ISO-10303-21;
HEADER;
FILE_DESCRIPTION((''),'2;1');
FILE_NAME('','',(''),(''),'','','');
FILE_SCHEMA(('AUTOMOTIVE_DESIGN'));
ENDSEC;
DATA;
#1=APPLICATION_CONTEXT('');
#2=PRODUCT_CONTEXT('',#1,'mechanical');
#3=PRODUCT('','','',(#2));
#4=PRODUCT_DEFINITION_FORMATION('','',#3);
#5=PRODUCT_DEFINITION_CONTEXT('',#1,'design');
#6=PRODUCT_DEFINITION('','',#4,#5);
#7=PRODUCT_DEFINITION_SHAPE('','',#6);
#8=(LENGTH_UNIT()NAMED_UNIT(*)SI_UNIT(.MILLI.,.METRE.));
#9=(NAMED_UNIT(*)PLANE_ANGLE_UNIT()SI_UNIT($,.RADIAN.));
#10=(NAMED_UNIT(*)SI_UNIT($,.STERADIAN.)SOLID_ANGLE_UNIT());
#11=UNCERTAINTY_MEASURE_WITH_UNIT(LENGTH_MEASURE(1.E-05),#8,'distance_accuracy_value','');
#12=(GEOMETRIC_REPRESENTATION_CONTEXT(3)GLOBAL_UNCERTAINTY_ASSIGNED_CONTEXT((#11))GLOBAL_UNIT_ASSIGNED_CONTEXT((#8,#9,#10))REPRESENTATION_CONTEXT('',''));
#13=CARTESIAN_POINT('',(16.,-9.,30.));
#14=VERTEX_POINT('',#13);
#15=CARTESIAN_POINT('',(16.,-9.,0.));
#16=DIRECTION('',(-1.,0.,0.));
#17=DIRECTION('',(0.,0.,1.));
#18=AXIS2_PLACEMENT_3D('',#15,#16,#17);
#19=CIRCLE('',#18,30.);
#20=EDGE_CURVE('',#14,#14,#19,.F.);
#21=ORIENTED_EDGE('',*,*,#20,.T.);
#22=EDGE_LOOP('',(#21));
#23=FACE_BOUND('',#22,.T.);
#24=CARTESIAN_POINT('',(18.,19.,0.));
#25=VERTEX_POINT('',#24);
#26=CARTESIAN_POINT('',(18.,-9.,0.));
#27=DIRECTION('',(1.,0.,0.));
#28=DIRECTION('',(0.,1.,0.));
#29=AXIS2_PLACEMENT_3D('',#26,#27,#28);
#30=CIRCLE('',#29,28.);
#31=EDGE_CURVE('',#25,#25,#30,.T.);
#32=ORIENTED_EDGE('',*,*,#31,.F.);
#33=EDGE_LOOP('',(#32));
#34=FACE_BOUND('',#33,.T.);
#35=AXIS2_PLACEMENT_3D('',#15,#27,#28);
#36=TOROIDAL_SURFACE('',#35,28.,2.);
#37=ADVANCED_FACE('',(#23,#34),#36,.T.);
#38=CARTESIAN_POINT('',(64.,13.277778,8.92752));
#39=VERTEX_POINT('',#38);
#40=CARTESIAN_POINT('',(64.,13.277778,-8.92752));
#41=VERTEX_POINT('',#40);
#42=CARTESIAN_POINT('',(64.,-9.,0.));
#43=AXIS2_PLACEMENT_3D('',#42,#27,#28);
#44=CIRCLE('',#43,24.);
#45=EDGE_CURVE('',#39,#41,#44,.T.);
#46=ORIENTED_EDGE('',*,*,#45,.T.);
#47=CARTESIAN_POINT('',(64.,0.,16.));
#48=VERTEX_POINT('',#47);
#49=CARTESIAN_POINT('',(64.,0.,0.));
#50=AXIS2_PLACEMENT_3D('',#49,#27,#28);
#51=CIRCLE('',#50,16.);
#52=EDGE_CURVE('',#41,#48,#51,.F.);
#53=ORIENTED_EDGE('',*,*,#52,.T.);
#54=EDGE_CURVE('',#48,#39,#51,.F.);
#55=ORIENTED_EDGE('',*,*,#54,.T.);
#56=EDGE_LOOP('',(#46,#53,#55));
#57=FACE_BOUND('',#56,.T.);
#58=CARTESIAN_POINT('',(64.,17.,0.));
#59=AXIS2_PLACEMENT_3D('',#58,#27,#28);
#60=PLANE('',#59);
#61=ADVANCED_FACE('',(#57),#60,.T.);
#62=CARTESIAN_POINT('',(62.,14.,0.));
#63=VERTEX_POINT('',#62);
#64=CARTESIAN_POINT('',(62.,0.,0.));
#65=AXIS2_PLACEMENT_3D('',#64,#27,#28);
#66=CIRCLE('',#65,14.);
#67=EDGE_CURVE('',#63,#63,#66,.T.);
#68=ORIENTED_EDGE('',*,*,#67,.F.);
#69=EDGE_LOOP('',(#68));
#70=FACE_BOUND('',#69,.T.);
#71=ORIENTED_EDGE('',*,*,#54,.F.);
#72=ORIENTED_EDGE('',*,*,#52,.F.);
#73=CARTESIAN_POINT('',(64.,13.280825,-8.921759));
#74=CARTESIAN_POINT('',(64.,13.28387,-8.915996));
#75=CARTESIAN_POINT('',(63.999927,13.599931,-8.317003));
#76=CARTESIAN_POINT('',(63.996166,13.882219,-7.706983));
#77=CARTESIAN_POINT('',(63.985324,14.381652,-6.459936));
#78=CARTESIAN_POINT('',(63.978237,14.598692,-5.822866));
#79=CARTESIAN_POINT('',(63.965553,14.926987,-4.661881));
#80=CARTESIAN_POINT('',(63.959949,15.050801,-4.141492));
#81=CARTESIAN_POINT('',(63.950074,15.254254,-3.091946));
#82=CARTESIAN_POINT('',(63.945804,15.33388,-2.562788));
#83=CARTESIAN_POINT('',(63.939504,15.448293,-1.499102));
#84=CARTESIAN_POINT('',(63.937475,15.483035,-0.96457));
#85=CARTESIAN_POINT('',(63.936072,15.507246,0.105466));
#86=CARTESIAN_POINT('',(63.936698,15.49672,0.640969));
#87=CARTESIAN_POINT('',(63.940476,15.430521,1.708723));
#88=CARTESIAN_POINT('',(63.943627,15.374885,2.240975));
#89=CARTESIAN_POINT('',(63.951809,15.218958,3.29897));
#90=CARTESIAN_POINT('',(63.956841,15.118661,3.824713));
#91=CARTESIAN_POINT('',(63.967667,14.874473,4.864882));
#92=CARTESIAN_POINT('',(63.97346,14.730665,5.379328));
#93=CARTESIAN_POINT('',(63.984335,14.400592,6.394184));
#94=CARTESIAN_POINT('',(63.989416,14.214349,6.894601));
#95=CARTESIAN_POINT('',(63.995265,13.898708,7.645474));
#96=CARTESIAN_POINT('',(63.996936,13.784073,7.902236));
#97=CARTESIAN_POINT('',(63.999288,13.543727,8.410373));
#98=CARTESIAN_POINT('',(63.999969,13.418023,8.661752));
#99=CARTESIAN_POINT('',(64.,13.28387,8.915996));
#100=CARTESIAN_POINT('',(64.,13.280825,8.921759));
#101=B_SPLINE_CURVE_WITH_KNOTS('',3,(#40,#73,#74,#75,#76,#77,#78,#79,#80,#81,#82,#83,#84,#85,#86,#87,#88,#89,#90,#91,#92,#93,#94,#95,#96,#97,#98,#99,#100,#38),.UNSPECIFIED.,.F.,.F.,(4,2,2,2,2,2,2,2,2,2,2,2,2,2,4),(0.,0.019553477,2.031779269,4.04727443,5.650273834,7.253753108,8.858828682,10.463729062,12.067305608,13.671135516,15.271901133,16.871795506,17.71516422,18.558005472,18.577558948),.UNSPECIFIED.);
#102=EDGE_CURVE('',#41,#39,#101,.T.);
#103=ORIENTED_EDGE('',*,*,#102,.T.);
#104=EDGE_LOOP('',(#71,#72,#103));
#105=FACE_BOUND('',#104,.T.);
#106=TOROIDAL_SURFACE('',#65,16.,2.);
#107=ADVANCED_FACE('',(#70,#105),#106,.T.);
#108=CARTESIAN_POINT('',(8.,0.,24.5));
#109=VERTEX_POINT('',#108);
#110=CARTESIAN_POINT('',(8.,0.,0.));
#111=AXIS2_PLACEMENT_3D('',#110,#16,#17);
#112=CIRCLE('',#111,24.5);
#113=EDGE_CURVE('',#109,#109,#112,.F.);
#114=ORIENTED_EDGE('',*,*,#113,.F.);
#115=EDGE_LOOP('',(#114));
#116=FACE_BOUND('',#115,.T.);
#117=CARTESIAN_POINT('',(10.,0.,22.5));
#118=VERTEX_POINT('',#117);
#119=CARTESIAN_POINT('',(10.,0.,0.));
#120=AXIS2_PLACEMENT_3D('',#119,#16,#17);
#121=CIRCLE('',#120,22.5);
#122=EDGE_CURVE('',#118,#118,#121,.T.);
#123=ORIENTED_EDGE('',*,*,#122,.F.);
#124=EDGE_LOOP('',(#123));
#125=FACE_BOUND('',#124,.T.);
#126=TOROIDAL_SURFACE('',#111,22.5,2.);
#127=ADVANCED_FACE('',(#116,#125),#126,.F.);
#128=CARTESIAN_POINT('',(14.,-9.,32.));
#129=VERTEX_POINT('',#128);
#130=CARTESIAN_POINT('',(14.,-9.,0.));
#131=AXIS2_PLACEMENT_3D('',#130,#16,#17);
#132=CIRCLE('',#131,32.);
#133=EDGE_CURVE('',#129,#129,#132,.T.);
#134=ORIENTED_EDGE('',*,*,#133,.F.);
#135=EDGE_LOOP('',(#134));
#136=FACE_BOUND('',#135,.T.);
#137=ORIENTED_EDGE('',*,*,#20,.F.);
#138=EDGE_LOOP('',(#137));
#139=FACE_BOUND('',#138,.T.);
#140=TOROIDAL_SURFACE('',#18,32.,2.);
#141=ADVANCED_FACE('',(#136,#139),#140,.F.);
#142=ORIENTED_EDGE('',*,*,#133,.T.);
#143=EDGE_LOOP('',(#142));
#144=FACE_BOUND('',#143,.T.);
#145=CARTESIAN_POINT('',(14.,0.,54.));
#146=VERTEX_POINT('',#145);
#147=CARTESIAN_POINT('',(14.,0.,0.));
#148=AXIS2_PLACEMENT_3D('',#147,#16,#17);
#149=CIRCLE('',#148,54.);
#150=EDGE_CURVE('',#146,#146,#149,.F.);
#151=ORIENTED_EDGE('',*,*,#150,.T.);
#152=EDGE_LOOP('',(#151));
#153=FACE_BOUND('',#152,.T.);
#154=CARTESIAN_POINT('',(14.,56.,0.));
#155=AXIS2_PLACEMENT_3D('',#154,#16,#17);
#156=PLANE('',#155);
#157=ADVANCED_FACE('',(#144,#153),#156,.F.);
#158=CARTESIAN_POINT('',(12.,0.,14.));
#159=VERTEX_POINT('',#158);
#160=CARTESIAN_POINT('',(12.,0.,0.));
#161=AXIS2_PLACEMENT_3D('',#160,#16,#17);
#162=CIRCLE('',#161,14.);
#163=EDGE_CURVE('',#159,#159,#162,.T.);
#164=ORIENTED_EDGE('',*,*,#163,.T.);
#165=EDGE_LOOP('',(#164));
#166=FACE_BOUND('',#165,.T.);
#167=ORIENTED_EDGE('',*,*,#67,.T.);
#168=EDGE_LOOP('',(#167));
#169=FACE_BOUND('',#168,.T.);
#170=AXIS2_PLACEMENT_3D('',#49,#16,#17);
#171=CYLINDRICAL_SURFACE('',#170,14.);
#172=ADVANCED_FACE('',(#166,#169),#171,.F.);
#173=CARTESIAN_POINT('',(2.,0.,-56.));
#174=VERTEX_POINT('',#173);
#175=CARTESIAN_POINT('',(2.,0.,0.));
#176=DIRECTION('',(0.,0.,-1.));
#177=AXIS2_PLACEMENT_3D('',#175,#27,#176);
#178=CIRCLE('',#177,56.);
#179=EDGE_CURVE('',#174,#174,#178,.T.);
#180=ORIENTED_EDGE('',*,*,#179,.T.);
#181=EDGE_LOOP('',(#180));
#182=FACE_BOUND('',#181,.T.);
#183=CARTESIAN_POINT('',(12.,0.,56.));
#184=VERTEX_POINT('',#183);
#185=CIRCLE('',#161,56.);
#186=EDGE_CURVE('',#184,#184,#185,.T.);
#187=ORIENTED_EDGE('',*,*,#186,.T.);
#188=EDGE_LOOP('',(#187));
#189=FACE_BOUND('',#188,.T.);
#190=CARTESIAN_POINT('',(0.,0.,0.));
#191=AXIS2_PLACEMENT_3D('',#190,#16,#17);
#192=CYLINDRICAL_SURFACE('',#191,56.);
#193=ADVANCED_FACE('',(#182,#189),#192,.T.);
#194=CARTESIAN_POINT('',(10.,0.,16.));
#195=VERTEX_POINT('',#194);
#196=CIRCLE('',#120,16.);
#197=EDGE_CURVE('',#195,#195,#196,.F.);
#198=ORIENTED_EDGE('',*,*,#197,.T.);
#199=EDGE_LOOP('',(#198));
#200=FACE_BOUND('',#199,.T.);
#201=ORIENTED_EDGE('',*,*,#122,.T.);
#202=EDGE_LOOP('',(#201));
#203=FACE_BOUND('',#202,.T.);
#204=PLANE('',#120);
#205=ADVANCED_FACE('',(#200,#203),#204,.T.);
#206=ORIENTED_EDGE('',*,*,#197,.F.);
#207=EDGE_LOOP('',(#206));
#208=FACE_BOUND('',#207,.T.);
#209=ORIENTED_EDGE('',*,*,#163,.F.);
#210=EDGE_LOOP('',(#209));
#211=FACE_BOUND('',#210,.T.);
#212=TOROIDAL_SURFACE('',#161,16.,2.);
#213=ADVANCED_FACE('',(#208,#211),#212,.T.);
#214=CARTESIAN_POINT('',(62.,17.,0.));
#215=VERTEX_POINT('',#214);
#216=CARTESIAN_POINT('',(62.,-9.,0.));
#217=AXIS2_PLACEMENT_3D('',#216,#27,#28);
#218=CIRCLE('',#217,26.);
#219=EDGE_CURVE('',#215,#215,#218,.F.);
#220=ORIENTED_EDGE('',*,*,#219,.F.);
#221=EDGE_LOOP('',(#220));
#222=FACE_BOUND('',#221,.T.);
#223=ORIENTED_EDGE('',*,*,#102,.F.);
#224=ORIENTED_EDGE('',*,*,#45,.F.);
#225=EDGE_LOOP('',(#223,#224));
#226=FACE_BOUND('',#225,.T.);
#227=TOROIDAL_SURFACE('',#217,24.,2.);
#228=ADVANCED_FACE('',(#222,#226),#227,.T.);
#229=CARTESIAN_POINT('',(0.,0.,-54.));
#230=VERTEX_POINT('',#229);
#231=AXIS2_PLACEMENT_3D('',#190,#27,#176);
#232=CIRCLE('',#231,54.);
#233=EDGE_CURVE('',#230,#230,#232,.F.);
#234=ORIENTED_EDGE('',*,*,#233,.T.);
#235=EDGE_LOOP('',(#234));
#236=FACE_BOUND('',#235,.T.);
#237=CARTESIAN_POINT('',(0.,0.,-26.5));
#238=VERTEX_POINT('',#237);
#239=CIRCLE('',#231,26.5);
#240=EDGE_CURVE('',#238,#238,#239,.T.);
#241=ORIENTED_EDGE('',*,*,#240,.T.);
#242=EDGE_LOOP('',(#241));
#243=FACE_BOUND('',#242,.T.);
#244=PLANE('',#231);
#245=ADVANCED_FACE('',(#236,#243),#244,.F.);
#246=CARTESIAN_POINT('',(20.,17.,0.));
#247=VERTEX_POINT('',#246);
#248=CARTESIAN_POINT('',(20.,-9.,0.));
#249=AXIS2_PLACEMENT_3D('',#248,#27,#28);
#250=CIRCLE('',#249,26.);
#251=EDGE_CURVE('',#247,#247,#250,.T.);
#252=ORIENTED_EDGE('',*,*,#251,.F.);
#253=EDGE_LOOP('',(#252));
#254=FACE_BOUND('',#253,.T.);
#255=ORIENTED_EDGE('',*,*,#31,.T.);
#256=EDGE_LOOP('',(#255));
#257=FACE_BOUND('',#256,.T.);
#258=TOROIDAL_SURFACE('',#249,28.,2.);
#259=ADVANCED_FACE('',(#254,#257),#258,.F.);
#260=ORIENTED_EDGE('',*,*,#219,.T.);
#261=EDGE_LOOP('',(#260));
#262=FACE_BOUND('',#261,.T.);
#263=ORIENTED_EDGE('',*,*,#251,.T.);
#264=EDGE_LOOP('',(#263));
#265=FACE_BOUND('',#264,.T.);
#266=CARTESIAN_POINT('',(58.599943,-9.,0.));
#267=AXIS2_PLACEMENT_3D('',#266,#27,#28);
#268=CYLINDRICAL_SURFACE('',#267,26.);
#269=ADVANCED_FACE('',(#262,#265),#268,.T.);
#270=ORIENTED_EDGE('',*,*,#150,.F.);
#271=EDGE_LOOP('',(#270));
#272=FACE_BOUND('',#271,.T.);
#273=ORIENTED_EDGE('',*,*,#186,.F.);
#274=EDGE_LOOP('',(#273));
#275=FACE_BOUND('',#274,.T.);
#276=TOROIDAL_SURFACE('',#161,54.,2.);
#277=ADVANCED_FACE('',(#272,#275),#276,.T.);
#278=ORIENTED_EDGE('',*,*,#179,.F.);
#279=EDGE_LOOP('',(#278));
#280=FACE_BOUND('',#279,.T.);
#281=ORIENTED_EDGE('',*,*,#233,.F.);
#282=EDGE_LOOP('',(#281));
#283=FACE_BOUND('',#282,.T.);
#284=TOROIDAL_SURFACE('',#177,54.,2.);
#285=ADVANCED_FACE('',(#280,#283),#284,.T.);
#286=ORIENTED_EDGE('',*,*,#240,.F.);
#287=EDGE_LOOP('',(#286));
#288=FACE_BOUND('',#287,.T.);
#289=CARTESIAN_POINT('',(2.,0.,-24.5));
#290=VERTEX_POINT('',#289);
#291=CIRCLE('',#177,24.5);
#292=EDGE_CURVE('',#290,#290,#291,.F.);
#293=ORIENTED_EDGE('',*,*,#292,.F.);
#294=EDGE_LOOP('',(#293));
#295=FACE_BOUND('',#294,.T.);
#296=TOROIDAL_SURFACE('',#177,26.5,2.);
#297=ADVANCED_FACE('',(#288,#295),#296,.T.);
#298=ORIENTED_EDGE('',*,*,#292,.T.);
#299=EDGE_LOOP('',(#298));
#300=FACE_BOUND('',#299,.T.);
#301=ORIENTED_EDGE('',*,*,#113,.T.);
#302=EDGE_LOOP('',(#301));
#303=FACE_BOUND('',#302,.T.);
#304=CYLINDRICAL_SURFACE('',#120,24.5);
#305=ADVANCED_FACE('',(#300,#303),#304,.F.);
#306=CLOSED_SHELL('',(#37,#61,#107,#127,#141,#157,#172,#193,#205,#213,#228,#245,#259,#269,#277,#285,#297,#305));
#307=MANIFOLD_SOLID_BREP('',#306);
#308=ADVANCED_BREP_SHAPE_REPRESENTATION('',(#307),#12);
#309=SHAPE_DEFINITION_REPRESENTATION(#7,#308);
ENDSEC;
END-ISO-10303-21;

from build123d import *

# Parameters (mm, degrees)
ESQUISSE1_W             = 14
ESQUISSE1_H             = 56
ESQUISSE2_R             = 24.5
ENL_V_MAT_EXTRU_1_DEPTH = 10
ESQUISSE4_R             = 14
ENL_V_MAT_EXTRU_2_DEPTH = 96.854055731
CONG_1_R                = 2


with BuildPart() as part:
    # Esquisse1 → Révolution1 (revolve)
    with BuildSketch(Plane.XY, mode=Mode.PRIVATE) as r_volution1_sk:
        with Locations((7, 28)):
            Rectangle(ESQUISSE1_W, ESQUISSE1_H)
    revolve(r_volution1_sk.sketch.rotate(Axis((0, 0, 0), (1, 0, 0)), 90), axis=Axis((0, 0, 0), (1, 0, 0)))

    # Esquisse2 → Enlèv. mat.-Extru.1 (cut)
    with BuildSketch(Plane.ZY):
        Circle(ESQUISSE2_R)
    extrude(amount=-ENL_V_MAT_EXTRU_1_DEPTH, mode=Mode.SUBTRACT)

    # Esquisse3 → Révolution2 (revolve)
    with BuildSketch(Plane.XY):
        Polygon((14, 21), (18, 21), (18, 17), (60, 17), (64, 17), (64, -9), (14, -9), align=None)
    revolve(axis=Axis((58.599942934, -9, 0), (-1, 0, 0)))

    # Esquisse4 → Enlèv. mat.-Extru.2 (cut, through all)
    with BuildSketch(Plane.ZY.offset(-10)):
        Circle(ESQUISSE4_R)
    extrude(amount=-ENL_V_MAT_EXTRU_2_DEPTH, mode=Mode.SUBTRACT)

    # Congé1
    # the kernel refuses this fillet: 2 mm, written as the material it adds along each edge
    with BuildSketch(Plane(origin=(14, -9, 0), x_dir=(0, 1, 0), z_dir=(0, 0, 1))) as cong_1_piece_1:
        with BuildLine():
            CenterArc((30 + CONG_1_R, -CONG_1_R), CONG_1_R, 90, 90)
            Line((30, -CONG_1_R), (30, 0))
            Line((30, 0), (30 + CONG_1_R, 0))
        make_face()
    revolve(axis=Axis((14, -9, 0), (-1, 0, 0)))
    with BuildSketch(Plane(origin=(18, -9, 0), x_dir=(0, 1, 0), z_dir=(0, 0, 1))) as cong_1_piece_2:
        with BuildLine():
            CenterArc((26 + CONG_1_R, -CONG_1_R), CONG_1_R, 90, 90)
            Line((26, -CONG_1_R), (26, 0))
            Line((26, 0), (26 + CONG_1_R, 0))
        make_face()
    revolve(axis=Axis((18, -9, 0), (-1, 0, 0)))
    with BuildSketch(Plane(origin=(10, 0, 0), x_dir=(0, 0, 1), z_dir=(0, -1, 0))) as cong_1_piece_3:
        with BuildLine():
            CenterArc((24.5 - CONG_1_R, CONG_1_R), CONG_1_R, 270, 90)
            Line((24.5 - CONG_1_R, 0), (24.5, 0))
            Line((24.5, 0), (24.5, CONG_1_R))
        make_face()
    revolve(axis=Axis((10, 0, 0), (-1, 0, 0)))
    # the kernel refuses this fillet: 2 mm, written as the material it takes off along each edge
    with BuildSketch(Plane(origin=(18, -9, 0), x_dir=(0, 1, 0), z_dir=(0, 0, 1))) as cong_1_2_piece_1:
        with BuildLine():
            CenterArc((30 - CONG_1_R, CONG_1_R), CONG_1_R, 270, 90)
            Line((30 - CONG_1_R, 0), (30, 0))
            Line((30, 0), (30, CONG_1_R))
        make_face()
    revolve(axis=Axis((18, -9, 0), (-1, 0, 0)), mode=Mode.SUBTRACT)
    with BuildSketch(Plane(origin=(64, -9, 0), x_dir=(0, 1, 0), z_dir=(0, 0, 1))) as cong_1_2_piece_2:
        with BuildLine():
            CenterArc((26 - CONG_1_R, CONG_1_R), CONG_1_R, 270, 90)
            Line((26, CONG_1_R), (26, 0))
            Line((26, 0), (26 - CONG_1_R, 0))
        make_face()
    revolve(axis=Axis((64, -9, 0), (-1, 0, 0)), mode=Mode.SUBTRACT)
    with BuildSketch(Plane(origin=(64, 0, 0), x_dir=(0, 0, 1), z_dir=(0, -1, 0))) as cong_1_2_piece_3:
        with BuildLine():
            CenterArc((14 + CONG_1_R, CONG_1_R), CONG_1_R, 180, 90)
            Line((14 + CONG_1_R, 0), (14, 0))
            Line((14, 0), (14, CONG_1_R))
        make_face()
    revolve(axis=Axis((64, 0, 0), (-1, 0, 0)), mode=Mode.SUBTRACT)
    with BuildSketch(Plane(origin=(10, 0, 0), x_dir=(0, 0, 1), z_dir=(0, -1, 0))) as cong_1_2_piece_4:
        with BuildLine():
            CenterArc((14 + CONG_1_R, -CONG_1_R), CONG_1_R, 90, 90)
            Line((14, -CONG_1_R), (14, 0))
            Line((14, 0), (14 + CONG_1_R, 0))
        make_face()
    revolve(axis=Axis((10, 0, 0), (-1, 0, 0)), mode=Mode.SUBTRACT)
    with BuildSketch(Plane(origin=(14, 0, 0), x_dir=(0, 0, 1), z_dir=(0, 1, 0))) as cong_1_2_piece_5:
        with BuildLine():
            CenterArc((56 - CONG_1_R, -CONG_1_R), CONG_1_R, 0, 90)
            Line((56 - CONG_1_R, 0), (56, 0))
            Line((56, 0), (56, -CONG_1_R))
        make_face()
    revolve(axis=Axis((14, 0, 0), (1, 0, 0)), mode=Mode.SUBTRACT)
    with BuildSketch(Plane(origin=(0, 0, 0), x_dir=(0, 0, 1), z_dir=(0, 1, 0))) as cong_1_2_piece_6:
        with BuildLine():
            CenterArc((56 - CONG_1_R, CONG_1_R), CONG_1_R, 270, 90)
            Line((56, CONG_1_R), (56, 0))
            Line((56, 0), (56 - CONG_1_R, 0))
        make_face()
    revolve(axis=Axis((0, 0, 0), (1, 0, 0)), mode=Mode.SUBTRACT)
    with BuildSketch(Plane(origin=(0, 0, 0), x_dir=(0, 0, 1), z_dir=(0, -1, 0))) as cong_1_2_piece_7:
        with BuildLine():
            CenterArc((24.5 + CONG_1_R, -CONG_1_R), CONG_1_R, 90, 90)
            Line((24.5, -CONG_1_R), (24.5, 0))
            Line((24.5, 0), (24.5 + CONG_1_R, 0))
        make_face()
    revolve(axis=Axis((0, 0, 0), (-1, 0, 0)), mode=Mode.SUBTRACT)


solid = part.part
